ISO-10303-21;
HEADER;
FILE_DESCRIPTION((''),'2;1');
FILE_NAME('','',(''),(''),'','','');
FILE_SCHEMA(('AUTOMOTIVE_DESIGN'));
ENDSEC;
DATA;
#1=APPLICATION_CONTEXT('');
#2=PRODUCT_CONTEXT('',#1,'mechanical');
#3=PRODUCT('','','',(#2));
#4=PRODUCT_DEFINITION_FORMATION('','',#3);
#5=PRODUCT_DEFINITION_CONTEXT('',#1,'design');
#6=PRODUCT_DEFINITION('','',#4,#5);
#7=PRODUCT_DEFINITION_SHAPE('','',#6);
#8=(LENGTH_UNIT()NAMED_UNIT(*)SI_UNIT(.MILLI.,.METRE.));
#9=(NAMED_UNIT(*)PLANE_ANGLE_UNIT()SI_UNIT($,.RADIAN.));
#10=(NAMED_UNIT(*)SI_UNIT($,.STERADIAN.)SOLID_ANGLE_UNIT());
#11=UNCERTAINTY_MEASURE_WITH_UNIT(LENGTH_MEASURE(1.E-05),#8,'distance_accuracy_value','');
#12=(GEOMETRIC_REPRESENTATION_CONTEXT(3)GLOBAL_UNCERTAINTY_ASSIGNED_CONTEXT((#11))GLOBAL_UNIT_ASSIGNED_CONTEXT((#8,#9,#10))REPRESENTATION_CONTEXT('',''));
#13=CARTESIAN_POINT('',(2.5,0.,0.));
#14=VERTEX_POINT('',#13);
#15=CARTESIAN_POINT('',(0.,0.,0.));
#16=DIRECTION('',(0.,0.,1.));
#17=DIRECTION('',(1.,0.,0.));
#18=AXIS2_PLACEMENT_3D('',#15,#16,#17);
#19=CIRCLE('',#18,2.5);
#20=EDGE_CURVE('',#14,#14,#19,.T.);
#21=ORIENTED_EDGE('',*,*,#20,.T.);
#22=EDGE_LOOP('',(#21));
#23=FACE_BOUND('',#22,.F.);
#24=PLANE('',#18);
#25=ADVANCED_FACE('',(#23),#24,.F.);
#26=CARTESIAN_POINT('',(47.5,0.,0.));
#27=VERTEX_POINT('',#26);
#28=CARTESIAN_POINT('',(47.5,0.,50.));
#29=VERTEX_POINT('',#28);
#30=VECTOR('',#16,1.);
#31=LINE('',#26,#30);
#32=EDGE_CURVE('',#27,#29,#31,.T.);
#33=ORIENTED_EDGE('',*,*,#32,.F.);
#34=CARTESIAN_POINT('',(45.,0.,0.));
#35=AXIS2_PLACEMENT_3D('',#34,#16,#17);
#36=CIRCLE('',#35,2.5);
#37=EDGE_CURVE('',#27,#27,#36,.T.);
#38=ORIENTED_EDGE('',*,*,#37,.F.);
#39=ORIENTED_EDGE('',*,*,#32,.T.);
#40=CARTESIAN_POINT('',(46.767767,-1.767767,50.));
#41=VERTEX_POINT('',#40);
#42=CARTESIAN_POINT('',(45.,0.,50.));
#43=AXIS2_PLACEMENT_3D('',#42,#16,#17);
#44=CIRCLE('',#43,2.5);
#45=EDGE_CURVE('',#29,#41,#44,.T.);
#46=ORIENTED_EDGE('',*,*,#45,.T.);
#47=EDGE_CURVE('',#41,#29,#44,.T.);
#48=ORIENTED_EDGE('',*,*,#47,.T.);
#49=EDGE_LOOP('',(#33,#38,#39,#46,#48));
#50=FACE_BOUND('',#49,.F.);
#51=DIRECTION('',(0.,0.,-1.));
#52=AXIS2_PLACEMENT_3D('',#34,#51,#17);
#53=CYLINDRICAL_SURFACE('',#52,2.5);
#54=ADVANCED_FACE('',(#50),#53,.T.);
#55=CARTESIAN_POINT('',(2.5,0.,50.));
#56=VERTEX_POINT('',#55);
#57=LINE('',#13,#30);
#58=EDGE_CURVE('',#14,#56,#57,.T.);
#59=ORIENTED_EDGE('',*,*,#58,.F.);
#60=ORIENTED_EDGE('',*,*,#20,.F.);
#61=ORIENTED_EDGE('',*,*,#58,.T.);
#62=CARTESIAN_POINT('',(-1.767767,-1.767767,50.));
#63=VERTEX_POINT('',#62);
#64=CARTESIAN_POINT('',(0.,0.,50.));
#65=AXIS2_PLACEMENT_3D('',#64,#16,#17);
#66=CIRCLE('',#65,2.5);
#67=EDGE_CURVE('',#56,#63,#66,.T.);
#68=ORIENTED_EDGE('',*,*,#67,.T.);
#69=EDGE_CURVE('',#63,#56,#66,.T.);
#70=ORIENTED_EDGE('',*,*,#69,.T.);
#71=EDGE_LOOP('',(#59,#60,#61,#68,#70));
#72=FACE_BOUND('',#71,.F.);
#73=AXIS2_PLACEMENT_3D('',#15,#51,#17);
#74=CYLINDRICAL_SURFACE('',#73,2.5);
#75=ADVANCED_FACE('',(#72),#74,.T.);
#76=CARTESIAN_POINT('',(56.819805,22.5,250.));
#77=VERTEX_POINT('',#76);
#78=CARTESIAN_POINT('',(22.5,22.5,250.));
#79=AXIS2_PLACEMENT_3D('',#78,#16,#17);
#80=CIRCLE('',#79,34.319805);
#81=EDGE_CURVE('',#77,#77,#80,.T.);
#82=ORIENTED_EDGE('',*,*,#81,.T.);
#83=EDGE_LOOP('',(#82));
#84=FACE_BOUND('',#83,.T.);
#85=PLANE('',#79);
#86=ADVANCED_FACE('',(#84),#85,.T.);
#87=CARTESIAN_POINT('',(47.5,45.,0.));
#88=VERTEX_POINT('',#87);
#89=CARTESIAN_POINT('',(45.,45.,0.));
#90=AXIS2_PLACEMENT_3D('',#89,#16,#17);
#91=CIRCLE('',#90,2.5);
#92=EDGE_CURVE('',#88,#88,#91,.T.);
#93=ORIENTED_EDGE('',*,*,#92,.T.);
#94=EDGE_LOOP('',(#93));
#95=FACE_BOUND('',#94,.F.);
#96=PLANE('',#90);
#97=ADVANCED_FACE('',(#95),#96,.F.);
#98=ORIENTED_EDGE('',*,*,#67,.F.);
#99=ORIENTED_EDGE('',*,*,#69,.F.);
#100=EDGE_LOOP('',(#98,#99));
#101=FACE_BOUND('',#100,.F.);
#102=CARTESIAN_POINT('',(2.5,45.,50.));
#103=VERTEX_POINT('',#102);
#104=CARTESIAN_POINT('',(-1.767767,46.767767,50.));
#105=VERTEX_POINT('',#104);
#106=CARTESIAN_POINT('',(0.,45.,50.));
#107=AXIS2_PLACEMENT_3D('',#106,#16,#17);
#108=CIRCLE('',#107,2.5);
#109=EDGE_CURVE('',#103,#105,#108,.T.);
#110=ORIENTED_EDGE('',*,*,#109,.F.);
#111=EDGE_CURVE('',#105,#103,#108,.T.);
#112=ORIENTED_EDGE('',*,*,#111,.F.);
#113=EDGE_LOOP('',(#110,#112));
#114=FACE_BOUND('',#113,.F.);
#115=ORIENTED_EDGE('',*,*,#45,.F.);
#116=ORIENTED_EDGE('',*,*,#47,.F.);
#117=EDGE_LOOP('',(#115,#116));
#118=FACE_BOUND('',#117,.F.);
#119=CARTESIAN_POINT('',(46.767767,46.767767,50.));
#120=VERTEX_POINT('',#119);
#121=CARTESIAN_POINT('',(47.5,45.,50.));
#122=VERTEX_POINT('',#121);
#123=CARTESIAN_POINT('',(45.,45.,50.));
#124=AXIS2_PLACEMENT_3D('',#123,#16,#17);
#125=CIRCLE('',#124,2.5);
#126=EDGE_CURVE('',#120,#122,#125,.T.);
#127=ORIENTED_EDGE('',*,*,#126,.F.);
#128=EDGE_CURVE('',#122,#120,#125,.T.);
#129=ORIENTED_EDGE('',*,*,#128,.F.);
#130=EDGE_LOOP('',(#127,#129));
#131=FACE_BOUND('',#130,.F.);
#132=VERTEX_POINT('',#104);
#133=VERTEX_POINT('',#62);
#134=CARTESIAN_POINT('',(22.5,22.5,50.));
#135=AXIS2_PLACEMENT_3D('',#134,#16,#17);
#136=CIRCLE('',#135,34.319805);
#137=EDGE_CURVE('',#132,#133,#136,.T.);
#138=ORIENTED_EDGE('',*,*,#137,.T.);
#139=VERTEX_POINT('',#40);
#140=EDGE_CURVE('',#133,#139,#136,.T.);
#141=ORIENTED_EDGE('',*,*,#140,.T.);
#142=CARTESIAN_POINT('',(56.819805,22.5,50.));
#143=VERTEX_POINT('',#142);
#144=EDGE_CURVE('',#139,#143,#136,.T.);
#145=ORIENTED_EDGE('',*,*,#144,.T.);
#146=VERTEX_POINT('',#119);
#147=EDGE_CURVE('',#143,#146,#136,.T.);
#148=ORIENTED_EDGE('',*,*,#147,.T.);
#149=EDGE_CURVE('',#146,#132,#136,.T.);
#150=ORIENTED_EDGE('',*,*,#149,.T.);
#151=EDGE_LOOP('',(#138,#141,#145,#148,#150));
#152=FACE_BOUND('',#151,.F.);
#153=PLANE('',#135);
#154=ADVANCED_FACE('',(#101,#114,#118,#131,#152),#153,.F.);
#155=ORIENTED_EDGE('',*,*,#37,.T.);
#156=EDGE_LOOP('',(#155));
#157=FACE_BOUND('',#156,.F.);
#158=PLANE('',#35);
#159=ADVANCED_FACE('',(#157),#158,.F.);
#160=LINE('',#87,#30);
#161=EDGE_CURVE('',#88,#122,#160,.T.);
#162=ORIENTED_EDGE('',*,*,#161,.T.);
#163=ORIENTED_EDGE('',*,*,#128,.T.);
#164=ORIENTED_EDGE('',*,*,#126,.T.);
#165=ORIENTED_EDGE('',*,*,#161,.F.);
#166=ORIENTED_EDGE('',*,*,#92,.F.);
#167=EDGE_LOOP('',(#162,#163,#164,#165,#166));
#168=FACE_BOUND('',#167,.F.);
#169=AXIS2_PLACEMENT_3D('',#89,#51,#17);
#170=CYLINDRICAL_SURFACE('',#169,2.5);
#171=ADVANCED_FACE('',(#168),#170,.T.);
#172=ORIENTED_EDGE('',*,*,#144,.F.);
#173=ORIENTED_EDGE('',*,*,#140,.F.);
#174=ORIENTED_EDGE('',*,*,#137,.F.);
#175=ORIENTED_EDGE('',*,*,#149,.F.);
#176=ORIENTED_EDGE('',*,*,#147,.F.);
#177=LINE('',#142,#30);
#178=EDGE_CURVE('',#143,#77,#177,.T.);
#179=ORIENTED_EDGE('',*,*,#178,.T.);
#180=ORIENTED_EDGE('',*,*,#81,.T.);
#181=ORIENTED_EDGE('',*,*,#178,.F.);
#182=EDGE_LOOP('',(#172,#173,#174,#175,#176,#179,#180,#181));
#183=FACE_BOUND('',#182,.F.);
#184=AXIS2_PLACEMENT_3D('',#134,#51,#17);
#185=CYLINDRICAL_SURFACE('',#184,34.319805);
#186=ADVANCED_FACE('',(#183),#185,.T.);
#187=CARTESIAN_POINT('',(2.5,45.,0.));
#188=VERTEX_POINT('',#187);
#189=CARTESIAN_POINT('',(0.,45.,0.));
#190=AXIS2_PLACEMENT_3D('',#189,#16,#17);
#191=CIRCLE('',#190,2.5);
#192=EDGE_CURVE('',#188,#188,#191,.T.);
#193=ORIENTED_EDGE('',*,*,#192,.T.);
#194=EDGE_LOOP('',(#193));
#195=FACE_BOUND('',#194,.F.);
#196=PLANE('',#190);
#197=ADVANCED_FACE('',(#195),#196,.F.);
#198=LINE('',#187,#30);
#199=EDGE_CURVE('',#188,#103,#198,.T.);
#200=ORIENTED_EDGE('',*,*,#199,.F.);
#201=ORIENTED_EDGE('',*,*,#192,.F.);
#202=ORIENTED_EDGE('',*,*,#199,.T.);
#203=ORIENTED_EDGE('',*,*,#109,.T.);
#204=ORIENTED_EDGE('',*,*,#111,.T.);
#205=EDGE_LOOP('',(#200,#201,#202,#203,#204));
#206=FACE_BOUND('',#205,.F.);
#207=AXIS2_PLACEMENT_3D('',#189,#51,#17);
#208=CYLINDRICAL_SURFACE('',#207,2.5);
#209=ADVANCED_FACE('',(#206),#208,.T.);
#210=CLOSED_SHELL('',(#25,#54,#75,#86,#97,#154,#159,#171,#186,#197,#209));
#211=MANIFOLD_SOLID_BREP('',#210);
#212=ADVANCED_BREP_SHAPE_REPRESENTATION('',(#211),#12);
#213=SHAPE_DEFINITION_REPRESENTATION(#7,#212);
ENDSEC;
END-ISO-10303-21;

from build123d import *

# Parameters (mm, degrees)
F0_R     = 2.5
F1_DEPTH = 50
F2_R     = 34.3198051534
F3_DEPTH = 200


# Not quite as in the source:
# - a feature of the source that left no trace in its solid (it failed there, or was rolled back) is left out


with BuildPart() as f1:
    # F0 (on Top) → F1 (new body)
    with BuildSketch(Plane.XY):
        with Locations((0, 45)):
            Circle(F0_R)
    extrude(amount=F1_DEPTH)



with BuildPart() as f1b:
    # F0 (on Top) → F1, piece 2 (new body)
    with BuildSketch(Plane.XY):
        with Locations((45, 45)):
            Circle(F0_R)
    extrude(amount=F1_DEPTH)


with BuildPart() as f1c:
    # F0 (on Top) → F1, piece 3 (new body)
    with BuildSketch(Plane.XY):
        Circle(F0_R)
    extrude(amount=F1_DEPTH)


with BuildPart() as f1d:
    # F0 (on Top) → F1, piece 4 (new body)
    with BuildSketch(Plane.XY):
        with Locations((45, 0)):
            Circle(F0_R)
    extrude(amount=F1_DEPTH)


with BuildPart() as f1_1:
    add(f1.part)

    add(f1b.part)  # F3 merges F1b

    add(f1c.part)  # F3 merges F1c

    add(f1d.part)  # F3 merges F1d
    # F2 (on face) → F3 (join)
    with BuildSketch(Plane.XY.offset(50)):
        with Locations((22.5, 22.5)):
            Circle(F2_R)
    extrude(amount=F3_DEPTH)


solid = f1_1.part
